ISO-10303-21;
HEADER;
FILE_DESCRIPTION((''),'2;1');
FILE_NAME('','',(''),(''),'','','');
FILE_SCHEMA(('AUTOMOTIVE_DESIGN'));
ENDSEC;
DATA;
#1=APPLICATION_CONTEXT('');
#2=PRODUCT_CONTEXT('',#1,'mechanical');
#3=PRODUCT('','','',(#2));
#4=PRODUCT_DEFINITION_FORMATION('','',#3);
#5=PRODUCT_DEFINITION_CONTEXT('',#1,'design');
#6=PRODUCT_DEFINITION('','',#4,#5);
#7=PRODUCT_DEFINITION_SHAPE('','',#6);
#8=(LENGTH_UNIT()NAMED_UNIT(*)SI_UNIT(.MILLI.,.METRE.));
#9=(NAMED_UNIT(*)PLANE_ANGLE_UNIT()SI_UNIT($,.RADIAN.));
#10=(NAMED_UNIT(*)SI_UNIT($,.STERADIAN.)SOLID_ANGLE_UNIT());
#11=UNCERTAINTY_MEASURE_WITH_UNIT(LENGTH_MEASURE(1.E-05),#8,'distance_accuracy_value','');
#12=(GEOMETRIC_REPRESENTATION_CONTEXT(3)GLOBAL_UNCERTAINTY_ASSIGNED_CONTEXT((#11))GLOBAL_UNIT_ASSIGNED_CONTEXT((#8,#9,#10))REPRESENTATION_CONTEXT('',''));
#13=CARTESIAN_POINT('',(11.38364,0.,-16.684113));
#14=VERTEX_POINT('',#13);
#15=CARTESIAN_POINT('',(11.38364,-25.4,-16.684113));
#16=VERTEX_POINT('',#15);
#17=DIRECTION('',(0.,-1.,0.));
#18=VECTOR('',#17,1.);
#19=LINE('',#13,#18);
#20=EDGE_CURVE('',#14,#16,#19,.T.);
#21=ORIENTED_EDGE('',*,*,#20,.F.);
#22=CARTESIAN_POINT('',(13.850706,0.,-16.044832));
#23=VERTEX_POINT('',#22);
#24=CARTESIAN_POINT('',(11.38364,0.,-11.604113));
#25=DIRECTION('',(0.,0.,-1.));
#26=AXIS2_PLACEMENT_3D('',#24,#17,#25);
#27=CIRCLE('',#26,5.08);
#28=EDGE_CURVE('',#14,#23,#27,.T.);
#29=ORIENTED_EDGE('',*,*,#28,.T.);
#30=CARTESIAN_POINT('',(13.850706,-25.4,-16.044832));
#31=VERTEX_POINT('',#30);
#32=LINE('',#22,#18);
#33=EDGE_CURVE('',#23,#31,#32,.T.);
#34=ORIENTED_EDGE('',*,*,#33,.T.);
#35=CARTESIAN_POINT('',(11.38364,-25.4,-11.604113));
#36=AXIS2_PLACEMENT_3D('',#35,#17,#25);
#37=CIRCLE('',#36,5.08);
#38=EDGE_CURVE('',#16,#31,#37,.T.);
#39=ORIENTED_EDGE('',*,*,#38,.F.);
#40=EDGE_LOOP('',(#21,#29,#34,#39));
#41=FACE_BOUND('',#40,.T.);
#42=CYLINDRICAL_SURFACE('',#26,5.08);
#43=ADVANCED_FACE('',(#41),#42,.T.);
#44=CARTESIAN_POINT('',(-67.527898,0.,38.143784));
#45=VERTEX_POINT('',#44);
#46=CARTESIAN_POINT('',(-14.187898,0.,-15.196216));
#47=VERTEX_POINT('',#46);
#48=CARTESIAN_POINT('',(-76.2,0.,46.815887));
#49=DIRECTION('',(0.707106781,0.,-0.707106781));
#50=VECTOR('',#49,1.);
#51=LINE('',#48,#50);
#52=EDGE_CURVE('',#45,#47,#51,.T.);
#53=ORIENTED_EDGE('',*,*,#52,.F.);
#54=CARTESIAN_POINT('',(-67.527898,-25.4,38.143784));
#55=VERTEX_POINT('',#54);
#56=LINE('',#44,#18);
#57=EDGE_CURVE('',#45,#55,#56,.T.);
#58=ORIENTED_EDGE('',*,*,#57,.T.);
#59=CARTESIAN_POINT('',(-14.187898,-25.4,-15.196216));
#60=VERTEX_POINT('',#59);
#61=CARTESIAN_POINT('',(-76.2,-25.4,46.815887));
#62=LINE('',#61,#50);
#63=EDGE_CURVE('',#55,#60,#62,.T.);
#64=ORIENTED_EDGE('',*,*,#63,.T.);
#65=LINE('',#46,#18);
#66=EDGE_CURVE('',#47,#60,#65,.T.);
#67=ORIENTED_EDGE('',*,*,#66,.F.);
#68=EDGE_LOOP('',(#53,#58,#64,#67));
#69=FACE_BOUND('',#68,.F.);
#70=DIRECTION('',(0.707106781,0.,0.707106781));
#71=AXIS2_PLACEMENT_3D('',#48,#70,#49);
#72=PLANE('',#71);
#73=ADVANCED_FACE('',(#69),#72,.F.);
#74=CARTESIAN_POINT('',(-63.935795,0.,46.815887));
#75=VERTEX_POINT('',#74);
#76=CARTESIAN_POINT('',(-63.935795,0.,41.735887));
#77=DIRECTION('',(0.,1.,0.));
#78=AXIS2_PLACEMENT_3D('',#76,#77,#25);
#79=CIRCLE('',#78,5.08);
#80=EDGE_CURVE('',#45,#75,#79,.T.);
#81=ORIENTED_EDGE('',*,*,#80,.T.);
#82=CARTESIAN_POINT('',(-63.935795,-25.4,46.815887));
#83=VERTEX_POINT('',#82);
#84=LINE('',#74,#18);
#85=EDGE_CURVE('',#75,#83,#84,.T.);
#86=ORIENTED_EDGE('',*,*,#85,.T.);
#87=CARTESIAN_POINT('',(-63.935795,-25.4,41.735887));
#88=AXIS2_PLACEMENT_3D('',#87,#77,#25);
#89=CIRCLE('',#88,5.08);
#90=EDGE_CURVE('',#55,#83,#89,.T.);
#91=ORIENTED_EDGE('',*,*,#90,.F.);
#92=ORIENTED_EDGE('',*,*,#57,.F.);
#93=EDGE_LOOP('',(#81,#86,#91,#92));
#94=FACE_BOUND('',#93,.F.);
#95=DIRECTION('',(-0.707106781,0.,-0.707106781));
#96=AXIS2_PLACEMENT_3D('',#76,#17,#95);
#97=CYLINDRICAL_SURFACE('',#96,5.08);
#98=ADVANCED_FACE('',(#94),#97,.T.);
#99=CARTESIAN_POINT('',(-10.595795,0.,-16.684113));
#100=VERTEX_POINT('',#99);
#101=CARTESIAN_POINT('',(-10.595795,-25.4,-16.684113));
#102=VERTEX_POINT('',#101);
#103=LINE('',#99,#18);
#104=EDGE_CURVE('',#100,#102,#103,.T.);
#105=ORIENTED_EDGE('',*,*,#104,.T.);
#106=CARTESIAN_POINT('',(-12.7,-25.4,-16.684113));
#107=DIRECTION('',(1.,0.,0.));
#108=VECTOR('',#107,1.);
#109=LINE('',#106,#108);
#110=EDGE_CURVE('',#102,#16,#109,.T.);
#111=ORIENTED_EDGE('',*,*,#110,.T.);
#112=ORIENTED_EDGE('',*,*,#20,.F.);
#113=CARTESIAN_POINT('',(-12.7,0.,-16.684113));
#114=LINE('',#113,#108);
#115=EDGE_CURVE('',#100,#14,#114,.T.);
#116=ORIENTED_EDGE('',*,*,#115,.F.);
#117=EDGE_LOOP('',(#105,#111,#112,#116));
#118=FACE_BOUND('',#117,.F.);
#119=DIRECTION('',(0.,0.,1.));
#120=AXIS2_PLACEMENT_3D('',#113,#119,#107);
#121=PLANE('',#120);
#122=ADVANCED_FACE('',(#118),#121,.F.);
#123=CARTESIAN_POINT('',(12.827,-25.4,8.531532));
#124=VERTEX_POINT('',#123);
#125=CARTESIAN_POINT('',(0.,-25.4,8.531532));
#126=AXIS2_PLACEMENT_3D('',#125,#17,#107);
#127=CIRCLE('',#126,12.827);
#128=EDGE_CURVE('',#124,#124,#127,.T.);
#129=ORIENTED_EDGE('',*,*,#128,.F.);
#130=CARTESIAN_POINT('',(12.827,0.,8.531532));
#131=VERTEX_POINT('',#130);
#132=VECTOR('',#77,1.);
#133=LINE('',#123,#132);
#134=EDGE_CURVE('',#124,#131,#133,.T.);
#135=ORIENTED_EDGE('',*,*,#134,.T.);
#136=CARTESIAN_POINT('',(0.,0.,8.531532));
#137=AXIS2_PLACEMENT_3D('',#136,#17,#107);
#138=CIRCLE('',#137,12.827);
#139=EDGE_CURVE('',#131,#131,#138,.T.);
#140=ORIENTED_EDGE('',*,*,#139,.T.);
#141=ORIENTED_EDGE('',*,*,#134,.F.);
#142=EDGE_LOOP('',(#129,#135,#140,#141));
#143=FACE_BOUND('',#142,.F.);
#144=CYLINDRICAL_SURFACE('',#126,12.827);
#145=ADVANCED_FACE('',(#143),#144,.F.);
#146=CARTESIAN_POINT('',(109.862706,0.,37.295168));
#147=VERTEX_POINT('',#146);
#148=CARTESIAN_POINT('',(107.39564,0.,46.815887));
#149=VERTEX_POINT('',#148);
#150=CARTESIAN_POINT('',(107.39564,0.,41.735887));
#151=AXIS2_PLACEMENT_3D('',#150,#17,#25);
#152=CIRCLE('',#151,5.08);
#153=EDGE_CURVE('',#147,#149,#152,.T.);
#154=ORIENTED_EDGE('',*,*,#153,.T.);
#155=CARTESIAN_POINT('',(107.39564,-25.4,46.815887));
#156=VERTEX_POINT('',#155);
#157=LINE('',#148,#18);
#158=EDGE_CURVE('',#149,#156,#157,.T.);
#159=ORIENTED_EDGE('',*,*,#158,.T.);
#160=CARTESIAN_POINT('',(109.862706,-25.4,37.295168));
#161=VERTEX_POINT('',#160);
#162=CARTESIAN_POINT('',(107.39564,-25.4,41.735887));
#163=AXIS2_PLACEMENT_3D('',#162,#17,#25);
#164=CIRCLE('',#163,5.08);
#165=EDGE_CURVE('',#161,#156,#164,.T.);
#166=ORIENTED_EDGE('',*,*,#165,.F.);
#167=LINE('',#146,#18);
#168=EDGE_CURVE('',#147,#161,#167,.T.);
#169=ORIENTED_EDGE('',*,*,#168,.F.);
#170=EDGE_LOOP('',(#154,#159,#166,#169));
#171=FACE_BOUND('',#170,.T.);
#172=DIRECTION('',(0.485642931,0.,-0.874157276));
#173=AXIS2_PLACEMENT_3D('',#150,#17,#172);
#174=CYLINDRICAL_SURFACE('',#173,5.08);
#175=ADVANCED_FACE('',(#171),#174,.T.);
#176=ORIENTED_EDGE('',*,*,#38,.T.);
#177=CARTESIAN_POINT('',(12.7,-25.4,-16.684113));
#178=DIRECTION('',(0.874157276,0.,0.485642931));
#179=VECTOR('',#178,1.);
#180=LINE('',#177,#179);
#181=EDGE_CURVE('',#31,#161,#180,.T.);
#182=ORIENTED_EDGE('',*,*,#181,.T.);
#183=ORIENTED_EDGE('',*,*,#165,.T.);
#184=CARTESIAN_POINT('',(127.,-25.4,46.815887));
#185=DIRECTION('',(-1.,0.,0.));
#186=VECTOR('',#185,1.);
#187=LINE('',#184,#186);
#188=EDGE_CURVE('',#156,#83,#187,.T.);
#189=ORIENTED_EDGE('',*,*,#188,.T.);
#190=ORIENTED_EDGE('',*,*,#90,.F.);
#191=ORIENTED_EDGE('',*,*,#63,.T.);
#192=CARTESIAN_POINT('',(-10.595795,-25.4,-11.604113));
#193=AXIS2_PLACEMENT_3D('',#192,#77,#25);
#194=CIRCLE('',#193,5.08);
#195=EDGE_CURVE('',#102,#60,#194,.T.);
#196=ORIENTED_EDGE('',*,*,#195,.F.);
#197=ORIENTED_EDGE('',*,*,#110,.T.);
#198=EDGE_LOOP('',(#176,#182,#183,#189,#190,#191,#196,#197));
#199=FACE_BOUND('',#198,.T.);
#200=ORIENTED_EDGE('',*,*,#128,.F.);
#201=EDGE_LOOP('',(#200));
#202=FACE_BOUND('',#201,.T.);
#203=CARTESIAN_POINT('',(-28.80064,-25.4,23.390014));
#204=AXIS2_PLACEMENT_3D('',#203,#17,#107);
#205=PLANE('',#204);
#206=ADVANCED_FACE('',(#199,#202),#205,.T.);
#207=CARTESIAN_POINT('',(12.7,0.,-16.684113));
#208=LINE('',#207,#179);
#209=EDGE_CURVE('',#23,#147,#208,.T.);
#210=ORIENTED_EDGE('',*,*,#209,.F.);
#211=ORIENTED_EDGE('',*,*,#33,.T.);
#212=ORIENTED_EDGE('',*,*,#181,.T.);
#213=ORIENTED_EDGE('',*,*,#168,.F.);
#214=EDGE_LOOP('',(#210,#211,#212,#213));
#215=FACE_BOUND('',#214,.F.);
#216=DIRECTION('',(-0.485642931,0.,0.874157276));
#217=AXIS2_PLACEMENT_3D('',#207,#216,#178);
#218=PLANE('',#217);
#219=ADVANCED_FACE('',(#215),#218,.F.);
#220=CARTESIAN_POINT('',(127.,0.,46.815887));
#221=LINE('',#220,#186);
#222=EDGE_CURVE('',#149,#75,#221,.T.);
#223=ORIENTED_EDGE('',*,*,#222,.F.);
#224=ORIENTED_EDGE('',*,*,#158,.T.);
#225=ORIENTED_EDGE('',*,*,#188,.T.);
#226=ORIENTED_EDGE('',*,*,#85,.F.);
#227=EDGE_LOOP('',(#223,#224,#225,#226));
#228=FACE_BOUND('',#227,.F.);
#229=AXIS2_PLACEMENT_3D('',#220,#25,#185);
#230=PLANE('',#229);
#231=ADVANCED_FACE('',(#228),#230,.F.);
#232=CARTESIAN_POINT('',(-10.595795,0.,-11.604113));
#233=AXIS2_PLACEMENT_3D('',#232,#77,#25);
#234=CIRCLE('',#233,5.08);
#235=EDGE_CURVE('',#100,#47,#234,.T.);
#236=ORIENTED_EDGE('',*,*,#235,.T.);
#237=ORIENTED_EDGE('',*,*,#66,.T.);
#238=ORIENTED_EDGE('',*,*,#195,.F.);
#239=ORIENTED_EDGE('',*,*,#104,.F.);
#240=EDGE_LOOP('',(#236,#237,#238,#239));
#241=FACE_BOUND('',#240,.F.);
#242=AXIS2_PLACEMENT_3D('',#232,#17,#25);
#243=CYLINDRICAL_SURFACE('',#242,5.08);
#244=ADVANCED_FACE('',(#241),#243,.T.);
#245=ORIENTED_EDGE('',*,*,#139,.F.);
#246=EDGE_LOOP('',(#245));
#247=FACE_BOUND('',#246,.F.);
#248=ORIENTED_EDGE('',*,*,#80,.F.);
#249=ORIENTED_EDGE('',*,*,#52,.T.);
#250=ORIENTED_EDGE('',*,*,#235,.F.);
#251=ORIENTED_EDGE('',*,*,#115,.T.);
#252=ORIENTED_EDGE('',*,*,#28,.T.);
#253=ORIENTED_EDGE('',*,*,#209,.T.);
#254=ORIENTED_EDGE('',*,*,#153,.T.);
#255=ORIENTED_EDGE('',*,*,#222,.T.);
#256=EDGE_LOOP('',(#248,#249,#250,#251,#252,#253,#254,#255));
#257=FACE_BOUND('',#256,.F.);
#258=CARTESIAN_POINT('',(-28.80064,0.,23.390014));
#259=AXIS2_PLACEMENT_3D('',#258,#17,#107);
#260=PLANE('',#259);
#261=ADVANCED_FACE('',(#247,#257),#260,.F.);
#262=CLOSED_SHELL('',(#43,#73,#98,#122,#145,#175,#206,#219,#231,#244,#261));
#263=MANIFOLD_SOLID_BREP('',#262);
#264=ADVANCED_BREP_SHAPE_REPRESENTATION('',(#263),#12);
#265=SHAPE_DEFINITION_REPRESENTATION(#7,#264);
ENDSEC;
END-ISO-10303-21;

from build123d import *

# Parameters (mm, degrees)
F2_DEPTH = 25.4
F3_DEPTH = 25.4
F4_R     = 5.08
F5_R     = 12.827
F5_R_2   = 12.7
F6_DEPTH = 25.4


with BuildPart() as f2:
    # F0 (on Front) → F2 (new body)
    with BuildSketch(Plane.XZ):
        Polygon((-12.7, -16.6841130704), (0, -16.6841130704), (0, 46.8158869296), (-76.2, 46.8158869296), align=None)
        Polygon((0, 46.8158869296), (0, -16.6841130704), (12.7, -16.6841130704), (127, 46.8158869296), align=None)
    extrude(amount=F2_DEPTH)

    # F1 (on face) → F3 (cut)
    with BuildSketch(Plane.XZ):
        with BuildLine():
            ThreePointArc((0, 21.231531626), (-12.7, 8.531531626), (0, -4.168468374))
            Line((0, -4.168468374), (0, 8.531531626))
            Line((0, 8.531531626), (0, 21.231531626))
        make_face()
        with BuildLine():
            Line((0, 8.531531626), (0, -4.168468374))
            ThreePointArc((0, -4.168468374), (8.9802561211, -0.4487244951), (12.7, 8.531531626))
            ThreePointArc((12.7, 8.531531626), (8.9802561211, 17.5117877471), (0, 21.231531626))
            Line((0, 21.231531626), (0, 8.531531626))
        make_face()
    extrude(amount=F3_DEPTH, mode=Mode.SUBTRACT)

    # F4
    f4_edges = [f2.edges().sort_by_distance(p)[0] for p in [
        (-12.7, -12.7, -16.684113),
        (12.7, -12.7, -16.684113),
        (127, -12.7, 46.815887),
        (-76.2, -12.7, 46.815887),
    ]]
    fillet(f4_edges, radius=F4_R)

    # F5 (on face) → F6 (cut)
    with BuildSketch(Plane.XZ.offset(25.4)):
        with Locations((0, 8.531531626)):
            Circle(F5_R)
        with Locations((0, 8.531531626)):
            Circle(F5_R_2, mode=Mode.SUBTRACT)
    extrude(amount=-F6_DEPTH, mode=Mode.SUBTRACT)


solid = f2.part
